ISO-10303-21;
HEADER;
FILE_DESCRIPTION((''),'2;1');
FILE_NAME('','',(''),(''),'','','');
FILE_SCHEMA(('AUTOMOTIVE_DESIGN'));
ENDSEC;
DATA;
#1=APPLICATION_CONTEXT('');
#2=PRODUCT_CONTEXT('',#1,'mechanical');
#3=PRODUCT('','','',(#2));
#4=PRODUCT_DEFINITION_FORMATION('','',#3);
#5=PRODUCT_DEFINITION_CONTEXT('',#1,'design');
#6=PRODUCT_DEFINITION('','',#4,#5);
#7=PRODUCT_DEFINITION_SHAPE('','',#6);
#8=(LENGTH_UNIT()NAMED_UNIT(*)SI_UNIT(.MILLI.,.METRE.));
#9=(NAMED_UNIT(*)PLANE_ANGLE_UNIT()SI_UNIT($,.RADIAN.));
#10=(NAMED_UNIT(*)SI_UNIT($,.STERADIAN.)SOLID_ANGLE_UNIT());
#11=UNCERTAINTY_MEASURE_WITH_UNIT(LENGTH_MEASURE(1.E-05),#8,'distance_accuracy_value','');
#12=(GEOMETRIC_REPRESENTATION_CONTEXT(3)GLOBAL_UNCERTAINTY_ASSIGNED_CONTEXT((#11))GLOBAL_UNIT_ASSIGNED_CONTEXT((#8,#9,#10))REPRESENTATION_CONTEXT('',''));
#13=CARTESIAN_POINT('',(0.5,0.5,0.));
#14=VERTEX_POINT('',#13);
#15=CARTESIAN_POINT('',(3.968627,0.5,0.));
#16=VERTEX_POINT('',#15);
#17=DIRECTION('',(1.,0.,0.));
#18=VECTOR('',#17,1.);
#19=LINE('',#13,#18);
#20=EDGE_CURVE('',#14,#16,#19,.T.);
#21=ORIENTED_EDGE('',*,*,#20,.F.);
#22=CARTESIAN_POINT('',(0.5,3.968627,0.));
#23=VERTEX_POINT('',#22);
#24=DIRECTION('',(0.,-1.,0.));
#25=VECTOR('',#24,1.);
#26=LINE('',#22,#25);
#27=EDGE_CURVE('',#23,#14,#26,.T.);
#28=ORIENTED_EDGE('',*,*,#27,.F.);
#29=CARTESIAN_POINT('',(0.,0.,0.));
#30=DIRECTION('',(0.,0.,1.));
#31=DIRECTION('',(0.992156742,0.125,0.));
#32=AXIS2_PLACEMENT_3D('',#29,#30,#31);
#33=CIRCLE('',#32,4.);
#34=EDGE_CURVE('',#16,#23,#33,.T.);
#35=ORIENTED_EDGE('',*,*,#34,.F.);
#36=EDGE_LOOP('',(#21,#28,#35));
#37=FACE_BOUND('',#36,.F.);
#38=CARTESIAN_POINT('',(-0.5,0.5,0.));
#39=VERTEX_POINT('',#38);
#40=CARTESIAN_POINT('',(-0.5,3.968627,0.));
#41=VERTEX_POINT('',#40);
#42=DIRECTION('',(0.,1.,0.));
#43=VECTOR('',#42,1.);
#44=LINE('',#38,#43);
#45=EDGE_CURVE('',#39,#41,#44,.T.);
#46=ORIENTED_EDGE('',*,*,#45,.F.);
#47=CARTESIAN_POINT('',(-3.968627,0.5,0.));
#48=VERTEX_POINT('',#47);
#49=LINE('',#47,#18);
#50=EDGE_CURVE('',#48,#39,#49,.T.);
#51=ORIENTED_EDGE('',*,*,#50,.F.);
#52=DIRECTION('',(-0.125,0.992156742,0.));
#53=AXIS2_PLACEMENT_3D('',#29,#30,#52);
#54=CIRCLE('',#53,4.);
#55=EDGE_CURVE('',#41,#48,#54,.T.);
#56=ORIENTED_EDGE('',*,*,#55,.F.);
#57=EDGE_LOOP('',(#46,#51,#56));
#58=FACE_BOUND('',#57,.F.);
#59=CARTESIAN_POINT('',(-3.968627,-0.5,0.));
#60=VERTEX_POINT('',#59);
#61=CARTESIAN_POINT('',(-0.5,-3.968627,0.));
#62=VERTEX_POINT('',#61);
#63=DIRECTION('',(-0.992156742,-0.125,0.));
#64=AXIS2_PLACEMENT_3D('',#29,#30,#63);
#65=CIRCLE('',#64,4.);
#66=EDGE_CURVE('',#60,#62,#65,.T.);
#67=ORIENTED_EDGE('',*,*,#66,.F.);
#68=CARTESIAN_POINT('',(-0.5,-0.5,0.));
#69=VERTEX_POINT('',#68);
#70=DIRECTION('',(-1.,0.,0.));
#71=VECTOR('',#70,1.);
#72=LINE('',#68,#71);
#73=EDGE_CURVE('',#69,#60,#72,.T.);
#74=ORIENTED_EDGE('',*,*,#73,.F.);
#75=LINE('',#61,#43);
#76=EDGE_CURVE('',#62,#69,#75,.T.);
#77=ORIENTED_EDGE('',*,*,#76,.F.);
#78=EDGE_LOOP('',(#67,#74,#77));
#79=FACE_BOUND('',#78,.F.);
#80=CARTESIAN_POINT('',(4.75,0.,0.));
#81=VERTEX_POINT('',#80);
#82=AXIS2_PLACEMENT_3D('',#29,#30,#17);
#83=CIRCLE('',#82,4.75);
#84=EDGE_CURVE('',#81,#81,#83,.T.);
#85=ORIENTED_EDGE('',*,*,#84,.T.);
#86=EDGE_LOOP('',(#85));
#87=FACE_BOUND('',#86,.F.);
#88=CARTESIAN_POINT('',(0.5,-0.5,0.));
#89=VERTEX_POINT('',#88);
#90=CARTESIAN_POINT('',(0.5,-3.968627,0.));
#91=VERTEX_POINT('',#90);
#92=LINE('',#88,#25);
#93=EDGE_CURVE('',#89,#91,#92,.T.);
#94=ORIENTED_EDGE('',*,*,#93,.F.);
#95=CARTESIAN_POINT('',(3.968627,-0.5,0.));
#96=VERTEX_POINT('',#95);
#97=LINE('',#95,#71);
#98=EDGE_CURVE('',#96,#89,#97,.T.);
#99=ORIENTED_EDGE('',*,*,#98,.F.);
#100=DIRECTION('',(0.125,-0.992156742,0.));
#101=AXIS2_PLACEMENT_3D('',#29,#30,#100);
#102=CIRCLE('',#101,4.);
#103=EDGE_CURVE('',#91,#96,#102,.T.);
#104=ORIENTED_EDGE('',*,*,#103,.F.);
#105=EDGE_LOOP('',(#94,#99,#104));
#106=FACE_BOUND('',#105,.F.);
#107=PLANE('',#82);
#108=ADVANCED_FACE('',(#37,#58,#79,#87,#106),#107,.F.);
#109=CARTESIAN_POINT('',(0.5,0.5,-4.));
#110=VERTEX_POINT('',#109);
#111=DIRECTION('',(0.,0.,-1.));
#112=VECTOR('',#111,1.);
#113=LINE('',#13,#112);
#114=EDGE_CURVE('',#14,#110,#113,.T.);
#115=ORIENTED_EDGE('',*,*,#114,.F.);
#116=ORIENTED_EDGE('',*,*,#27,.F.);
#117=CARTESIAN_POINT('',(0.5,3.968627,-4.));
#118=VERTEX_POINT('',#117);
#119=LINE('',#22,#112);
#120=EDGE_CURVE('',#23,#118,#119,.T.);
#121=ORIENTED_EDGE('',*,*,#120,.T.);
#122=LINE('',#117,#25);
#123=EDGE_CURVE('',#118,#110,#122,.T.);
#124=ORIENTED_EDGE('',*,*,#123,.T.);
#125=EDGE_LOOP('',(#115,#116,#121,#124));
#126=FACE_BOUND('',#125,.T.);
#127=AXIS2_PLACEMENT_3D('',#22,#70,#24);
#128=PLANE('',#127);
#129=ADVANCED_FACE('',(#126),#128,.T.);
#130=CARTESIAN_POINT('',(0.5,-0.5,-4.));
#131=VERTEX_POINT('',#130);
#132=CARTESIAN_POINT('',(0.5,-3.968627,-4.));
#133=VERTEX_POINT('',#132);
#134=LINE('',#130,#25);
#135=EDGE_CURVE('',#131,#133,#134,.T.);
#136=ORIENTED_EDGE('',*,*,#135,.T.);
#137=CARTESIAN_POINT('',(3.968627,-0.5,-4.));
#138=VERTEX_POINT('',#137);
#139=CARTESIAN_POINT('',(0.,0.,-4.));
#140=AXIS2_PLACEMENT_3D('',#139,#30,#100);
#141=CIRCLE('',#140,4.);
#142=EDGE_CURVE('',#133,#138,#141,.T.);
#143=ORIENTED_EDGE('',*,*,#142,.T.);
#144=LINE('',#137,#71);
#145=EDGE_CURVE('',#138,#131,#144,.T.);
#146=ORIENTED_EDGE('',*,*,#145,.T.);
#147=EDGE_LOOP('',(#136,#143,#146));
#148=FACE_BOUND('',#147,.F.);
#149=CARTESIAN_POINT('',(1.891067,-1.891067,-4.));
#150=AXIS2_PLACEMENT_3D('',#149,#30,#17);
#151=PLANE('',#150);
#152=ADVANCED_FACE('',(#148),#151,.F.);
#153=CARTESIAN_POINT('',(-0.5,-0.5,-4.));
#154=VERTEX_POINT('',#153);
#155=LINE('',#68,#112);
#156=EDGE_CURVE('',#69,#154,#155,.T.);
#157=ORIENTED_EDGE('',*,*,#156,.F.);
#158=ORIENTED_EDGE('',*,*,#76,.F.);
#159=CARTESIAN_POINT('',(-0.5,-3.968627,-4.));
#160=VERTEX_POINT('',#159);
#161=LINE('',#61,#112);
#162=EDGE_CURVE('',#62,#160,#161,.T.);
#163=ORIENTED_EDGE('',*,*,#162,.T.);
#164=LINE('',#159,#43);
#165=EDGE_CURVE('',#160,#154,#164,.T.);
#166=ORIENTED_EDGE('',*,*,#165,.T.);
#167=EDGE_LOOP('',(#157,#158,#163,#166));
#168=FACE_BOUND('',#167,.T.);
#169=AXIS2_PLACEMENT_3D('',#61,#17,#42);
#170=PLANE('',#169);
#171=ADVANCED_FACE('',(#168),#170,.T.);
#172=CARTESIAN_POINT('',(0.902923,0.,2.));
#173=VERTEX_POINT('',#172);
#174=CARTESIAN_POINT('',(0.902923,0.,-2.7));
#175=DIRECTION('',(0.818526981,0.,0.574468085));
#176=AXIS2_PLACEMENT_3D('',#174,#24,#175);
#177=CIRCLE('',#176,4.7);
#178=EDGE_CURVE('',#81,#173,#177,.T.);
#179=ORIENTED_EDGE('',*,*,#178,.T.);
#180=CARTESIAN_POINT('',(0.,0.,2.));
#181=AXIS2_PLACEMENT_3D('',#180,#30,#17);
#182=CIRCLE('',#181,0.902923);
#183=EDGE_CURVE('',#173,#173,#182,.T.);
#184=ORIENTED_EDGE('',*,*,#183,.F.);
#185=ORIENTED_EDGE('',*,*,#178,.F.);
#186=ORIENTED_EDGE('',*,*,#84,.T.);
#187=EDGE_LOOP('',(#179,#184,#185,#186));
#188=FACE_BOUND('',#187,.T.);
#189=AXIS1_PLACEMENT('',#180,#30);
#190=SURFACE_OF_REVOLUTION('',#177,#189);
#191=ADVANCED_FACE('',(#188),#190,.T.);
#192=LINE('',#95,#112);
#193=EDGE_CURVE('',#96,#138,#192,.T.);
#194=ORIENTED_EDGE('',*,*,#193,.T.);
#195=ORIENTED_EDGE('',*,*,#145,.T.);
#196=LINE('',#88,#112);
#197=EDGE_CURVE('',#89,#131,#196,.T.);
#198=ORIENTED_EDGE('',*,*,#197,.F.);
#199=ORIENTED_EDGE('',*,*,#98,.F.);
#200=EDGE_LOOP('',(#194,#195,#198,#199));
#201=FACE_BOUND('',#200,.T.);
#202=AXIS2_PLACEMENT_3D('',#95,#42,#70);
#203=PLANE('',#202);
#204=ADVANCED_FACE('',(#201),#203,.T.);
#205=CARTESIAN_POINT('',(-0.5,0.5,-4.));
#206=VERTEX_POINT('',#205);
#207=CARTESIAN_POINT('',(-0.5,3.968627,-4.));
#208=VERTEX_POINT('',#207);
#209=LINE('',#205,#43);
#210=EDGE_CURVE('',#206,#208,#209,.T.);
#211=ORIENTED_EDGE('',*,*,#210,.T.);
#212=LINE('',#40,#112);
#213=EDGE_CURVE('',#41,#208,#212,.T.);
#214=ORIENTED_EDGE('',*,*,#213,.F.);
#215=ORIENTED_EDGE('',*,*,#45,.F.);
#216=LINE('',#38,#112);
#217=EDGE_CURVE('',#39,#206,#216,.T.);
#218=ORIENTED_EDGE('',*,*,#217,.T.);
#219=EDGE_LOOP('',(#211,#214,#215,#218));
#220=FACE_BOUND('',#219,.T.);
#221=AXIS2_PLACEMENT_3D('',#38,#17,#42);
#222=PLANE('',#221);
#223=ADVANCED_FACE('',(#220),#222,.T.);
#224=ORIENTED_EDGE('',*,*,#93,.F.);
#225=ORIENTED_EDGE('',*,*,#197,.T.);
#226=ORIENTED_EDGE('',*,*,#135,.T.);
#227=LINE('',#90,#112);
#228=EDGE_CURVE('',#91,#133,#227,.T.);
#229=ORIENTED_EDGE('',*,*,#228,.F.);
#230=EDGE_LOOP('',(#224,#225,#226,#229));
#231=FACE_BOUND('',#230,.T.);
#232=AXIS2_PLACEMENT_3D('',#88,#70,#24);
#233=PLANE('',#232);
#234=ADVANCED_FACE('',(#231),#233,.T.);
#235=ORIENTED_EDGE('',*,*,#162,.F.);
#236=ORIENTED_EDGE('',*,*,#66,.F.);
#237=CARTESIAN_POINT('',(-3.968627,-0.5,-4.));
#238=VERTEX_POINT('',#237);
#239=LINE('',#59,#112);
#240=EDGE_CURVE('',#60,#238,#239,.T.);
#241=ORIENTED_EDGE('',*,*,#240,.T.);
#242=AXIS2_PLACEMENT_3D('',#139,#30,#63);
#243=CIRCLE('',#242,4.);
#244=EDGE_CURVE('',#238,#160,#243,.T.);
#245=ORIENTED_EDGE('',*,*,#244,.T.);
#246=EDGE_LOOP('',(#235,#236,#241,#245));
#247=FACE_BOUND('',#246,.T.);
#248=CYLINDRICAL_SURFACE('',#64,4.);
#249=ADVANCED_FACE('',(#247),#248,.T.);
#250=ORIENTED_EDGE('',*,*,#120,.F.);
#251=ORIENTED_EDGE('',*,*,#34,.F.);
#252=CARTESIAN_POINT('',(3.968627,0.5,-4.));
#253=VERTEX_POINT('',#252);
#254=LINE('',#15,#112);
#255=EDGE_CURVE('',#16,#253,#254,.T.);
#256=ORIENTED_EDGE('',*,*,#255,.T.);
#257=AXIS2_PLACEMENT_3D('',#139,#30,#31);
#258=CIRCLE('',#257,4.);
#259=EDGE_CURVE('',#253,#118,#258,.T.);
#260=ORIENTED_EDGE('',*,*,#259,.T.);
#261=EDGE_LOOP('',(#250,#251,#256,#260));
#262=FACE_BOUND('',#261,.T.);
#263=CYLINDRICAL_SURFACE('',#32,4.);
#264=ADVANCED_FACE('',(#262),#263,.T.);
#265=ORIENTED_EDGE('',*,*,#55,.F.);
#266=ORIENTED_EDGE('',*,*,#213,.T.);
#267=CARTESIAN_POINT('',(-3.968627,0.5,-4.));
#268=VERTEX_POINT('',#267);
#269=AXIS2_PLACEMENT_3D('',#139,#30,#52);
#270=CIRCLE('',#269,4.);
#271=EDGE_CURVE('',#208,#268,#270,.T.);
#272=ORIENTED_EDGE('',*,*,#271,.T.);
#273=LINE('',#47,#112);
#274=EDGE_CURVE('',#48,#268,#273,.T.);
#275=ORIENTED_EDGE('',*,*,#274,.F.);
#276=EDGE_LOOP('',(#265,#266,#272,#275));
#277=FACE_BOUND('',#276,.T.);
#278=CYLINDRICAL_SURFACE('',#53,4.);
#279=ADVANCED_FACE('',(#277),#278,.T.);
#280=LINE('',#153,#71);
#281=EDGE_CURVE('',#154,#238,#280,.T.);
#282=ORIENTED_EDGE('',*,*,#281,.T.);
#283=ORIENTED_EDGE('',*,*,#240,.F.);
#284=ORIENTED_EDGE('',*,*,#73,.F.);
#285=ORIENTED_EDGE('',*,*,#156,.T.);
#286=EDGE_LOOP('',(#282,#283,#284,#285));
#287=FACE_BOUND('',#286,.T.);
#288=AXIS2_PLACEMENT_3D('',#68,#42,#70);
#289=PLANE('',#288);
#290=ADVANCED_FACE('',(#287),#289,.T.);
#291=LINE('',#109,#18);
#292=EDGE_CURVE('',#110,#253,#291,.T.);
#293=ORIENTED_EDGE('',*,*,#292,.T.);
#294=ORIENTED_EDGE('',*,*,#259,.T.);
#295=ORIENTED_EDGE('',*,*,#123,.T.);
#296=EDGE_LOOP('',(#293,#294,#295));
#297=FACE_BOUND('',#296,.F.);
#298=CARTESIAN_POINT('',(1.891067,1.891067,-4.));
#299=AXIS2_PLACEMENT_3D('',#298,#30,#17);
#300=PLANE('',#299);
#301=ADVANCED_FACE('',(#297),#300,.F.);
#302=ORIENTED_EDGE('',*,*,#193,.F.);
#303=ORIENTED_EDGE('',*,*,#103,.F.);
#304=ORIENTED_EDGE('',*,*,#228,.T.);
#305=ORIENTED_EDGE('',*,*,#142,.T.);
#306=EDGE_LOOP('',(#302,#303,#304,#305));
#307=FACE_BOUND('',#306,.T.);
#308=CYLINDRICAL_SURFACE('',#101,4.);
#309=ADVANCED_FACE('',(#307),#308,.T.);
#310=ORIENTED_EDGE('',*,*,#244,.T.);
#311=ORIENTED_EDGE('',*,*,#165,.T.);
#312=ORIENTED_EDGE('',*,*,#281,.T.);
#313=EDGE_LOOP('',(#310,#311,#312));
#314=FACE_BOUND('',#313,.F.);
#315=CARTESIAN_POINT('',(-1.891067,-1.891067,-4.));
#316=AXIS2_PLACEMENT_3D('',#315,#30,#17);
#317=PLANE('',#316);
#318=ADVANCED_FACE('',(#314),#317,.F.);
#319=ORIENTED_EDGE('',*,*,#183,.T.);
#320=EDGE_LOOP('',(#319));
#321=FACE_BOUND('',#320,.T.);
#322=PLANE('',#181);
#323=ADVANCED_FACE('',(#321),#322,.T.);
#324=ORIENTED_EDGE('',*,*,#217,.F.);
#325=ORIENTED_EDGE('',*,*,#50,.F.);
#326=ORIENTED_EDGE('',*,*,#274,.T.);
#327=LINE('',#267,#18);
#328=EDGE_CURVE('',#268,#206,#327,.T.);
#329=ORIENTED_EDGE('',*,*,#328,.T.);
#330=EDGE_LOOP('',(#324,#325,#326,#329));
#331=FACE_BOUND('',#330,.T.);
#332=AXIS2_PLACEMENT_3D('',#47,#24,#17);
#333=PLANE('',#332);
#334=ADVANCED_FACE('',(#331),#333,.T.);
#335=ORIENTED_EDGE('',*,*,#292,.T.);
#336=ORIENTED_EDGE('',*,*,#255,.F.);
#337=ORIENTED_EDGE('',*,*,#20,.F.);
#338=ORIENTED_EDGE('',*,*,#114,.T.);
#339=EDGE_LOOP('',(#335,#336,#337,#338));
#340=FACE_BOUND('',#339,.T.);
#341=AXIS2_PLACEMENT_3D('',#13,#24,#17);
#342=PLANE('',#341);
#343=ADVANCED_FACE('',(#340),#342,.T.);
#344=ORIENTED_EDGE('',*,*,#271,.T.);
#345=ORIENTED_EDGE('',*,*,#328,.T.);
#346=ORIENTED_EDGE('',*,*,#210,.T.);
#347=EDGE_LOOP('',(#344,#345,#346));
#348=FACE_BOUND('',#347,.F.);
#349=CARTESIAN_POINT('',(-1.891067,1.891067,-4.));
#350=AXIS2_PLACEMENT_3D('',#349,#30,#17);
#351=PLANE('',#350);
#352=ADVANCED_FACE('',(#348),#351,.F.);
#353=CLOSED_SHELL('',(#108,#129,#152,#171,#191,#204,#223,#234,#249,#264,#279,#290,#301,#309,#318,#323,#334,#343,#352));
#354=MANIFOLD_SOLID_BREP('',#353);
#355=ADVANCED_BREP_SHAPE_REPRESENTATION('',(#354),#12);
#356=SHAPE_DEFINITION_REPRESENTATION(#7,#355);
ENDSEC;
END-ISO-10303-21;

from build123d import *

# Parameters (mm, degrees)
F0_R     = 4.75
F1_DEPTH = 2
F2_DEPTH = 4


# Not quite as in the source:
# - a fillet or chamfer that OpenCascade refuses, or shapes differently, is made with other operations: its cross-section is extruded or revolved along the edge and cut away or added
# - a feature names something its author has since deleted; it is built from what else it names


with BuildPart() as f1:
    # F0 (on Top) → F1 (new body)
    with BuildSketch(Plane.XY):
        Circle(F0_R)
        with BuildLine():
            ThreePointArc((-0.5, -3.9686269666), (-2.8284271247, -2.8284271247), (-3.9686269666, -0.5))
            Line((-3.9686269666, -0.5), (-2.7549954628, -0.5))
            Line((-2.7549954628, -0.5), (-0.5, -0.5))
            Line((-0.5, -0.5), (-0.5, -2.7549954628))
            Line((-0.5, -2.7549954628), (-0.5, -3.9686269666))
        make_face(mode=Mode.SUBTRACT)
        with BuildLine():
            Line((0.5, -0.5), (2.7549954628, -0.5))
            Line((2.7549954628, -0.5), (3.9686269666, -0.5))
            ThreePointArc((3.9686269666, -0.5), (2.8284271247, -2.8284271247), (0.5, -3.9686269666))
            Line((0.5, -3.9686269666), (0.5, -2.7549954628))
            Line((0.5, -2.7549954628), (0.5, -0.5))
        make_face(mode=Mode.SUBTRACT)
        with BuildLine():
            Line((-2.7549954628, 0.5), (-3.9686269666, 0.5))
            ThreePointArc((-3.9686269666, 0.5), (-2.8284271247, 2.8284271247), (-0.5, 3.9686269666))
            Line((-0.5, 3.9686269666), (-0.5, 2.7549954628))
            Line((-0.5, 2.7549954628), (-0.5, 0.5))
            Line((-0.5, 0.5), (-2.7549954628, 0.5))
        make_face(mode=Mode.SUBTRACT)
        with BuildLine():
            Line((3.9686269666, 0.5), (2.7549954628, 0.5))
            Line((2.7549954628, 0.5), (0.5, 0.5))
            Line((0.5, 0.5), (0.5, 2.7549954628))
            Line((0.5, 2.7549954628), (0.5, 3.9686269666))
            ThreePointArc((0.5, 3.9686269666), (2.8284271247, 2.8284271247), (3.9686269666, 0.5))
        make_face(mode=Mode.SUBTRACT)
        with BuildLine():
            Line((-2.7549954628, -0.5), (-3.9686269666, -0.5))
            ThreePointArc((-3.9686269666, -0.5), (-2.8284271247, -2.8284271247), (-0.5, -3.9686269666))
            Line((-0.5, -3.9686269666), (-0.5, -2.7549954628))
            Line((-0.5, -2.7549954628), (-0.5, -0.5))
            Line((-0.5, -0.5), (-2.7549954628, -0.5))
        make_face()
        with BuildLine():
            ThreePointArc((-0.5, 3.9686269666), (-2.8284271247, 2.8284271247), (-3.9686269666, 0.5))
            Line((-3.9686269666, 0.5), (-2.7549954628, 0.5))
            Line((-2.7549954628, 0.5), (-0.5, 0.5))
            Line((-0.5, 0.5), (-0.5, 2.7549954628))
            Line((-0.5, 2.7549954628), (-0.5, 3.9686269666))
        make_face()
        with BuildLine():
            Line((0.5, 0.5), (2.7549954628, 0.5))
            Line((2.7549954628, 0.5), (3.9686269666, 0.5))
            ThreePointArc((3.9686269666, 0.5), (2.8284271247, 2.8284271247), (0.5, 3.9686269666))
            Line((0.5, 3.9686269666), (0.5, 2.7549954628))
            Line((0.5, 2.7549954628), (0.5, 0.5))
        make_face()
        with BuildLine():
            Line((3.9686269666, -0.5), (2.7549954628, -0.5))
            Line((2.7549954628, -0.5), (0.5, -0.5))
            Line((0.5, -0.5), (0.5, -2.7549954628))
            Line((0.5, -2.7549954628), (0.5, -3.9686269666))
            ThreePointArc((0.5, -3.9686269666), (2.8284271247, -2.8284271247), (3.9686269666, -0.5))
        make_face()
    extrude(amount=F1_DEPTH)

    # F0 (on Top) → F2 (join)
    with BuildSketch(Plane.XY):
        with BuildLine():
            ThreePointArc((-0.5, 3.9686269666), (-2.8284271247, 2.8284271247), (-3.9686269666, 0.5))
            Line((-3.9686269666, 0.5), (-2.7549954628, 0.5))
            Line((-2.7549954628, 0.5), (-0.5, 0.5))
            Line((-0.5, 0.5), (-0.5, 2.7549954628))
            Line((-0.5, 2.7549954628), (-0.5, 3.9686269666))
        make_face()
        with BuildLine():
            Line((-2.7549954628, -0.5), (-3.9686269666, -0.5))
            ThreePointArc((-3.9686269666, -0.5), (-2.8284271247, -2.8284271247), (-0.5, -3.9686269666))
            Line((-0.5, -3.9686269666), (-0.5, -2.7549954628))
            Line((-0.5, -2.7549954628), (-0.5, -0.5))
            Line((-0.5, -0.5), (-2.7549954628, -0.5))
        make_face()
        with BuildLine():
            Line((3.9686269666, -0.5), (2.7549954628, -0.5))
            Line((2.7549954628, -0.5), (0.5, -0.5))
            Line((0.5, -0.5), (0.5, -2.7549954628))
            Line((0.5, -2.7549954628), (0.5, -3.9686269666))
            ThreePointArc((0.5, -3.9686269666), (2.8284271247, -2.8284271247), (3.9686269666, -0.5))
        make_face()
        with BuildLine():
            Line((0.5, 0.5), (2.7549954628, 0.5))
            Line((2.7549954628, 0.5), (3.9686269666, 0.5))
            ThreePointArc((3.9686269666, 0.5), (2.8284271247, 2.8284271247), (0.5, 3.9686269666))
            Line((0.5, 3.9686269666), (0.5, 2.7549954628))
            Line((0.5, 2.7549954628), (0.5, 0.5))
        make_face()
    extrude(amount=-F2_DEPTH)

    # F3: fillet of radius 4.7 on 1 edges, made by hand

    # F3_s1 → F3_t2 (revolve, cut)
    with BuildSketch(Plane.XZ):
        with BuildLine():
            ThreePointArc((4.75, 0), (3.0708715265, 1.4701318924), (0.9029231877, 2))
            Line((0.9029231877, 2), (4.75, 2))
            Line((4.75, 2), (4.75, 0))
        make_face()
    revolve(axis=Axis((0, 0, 2), (0, 0, 1)), mode=Mode.SUBTRACT)


solid = f1.part
